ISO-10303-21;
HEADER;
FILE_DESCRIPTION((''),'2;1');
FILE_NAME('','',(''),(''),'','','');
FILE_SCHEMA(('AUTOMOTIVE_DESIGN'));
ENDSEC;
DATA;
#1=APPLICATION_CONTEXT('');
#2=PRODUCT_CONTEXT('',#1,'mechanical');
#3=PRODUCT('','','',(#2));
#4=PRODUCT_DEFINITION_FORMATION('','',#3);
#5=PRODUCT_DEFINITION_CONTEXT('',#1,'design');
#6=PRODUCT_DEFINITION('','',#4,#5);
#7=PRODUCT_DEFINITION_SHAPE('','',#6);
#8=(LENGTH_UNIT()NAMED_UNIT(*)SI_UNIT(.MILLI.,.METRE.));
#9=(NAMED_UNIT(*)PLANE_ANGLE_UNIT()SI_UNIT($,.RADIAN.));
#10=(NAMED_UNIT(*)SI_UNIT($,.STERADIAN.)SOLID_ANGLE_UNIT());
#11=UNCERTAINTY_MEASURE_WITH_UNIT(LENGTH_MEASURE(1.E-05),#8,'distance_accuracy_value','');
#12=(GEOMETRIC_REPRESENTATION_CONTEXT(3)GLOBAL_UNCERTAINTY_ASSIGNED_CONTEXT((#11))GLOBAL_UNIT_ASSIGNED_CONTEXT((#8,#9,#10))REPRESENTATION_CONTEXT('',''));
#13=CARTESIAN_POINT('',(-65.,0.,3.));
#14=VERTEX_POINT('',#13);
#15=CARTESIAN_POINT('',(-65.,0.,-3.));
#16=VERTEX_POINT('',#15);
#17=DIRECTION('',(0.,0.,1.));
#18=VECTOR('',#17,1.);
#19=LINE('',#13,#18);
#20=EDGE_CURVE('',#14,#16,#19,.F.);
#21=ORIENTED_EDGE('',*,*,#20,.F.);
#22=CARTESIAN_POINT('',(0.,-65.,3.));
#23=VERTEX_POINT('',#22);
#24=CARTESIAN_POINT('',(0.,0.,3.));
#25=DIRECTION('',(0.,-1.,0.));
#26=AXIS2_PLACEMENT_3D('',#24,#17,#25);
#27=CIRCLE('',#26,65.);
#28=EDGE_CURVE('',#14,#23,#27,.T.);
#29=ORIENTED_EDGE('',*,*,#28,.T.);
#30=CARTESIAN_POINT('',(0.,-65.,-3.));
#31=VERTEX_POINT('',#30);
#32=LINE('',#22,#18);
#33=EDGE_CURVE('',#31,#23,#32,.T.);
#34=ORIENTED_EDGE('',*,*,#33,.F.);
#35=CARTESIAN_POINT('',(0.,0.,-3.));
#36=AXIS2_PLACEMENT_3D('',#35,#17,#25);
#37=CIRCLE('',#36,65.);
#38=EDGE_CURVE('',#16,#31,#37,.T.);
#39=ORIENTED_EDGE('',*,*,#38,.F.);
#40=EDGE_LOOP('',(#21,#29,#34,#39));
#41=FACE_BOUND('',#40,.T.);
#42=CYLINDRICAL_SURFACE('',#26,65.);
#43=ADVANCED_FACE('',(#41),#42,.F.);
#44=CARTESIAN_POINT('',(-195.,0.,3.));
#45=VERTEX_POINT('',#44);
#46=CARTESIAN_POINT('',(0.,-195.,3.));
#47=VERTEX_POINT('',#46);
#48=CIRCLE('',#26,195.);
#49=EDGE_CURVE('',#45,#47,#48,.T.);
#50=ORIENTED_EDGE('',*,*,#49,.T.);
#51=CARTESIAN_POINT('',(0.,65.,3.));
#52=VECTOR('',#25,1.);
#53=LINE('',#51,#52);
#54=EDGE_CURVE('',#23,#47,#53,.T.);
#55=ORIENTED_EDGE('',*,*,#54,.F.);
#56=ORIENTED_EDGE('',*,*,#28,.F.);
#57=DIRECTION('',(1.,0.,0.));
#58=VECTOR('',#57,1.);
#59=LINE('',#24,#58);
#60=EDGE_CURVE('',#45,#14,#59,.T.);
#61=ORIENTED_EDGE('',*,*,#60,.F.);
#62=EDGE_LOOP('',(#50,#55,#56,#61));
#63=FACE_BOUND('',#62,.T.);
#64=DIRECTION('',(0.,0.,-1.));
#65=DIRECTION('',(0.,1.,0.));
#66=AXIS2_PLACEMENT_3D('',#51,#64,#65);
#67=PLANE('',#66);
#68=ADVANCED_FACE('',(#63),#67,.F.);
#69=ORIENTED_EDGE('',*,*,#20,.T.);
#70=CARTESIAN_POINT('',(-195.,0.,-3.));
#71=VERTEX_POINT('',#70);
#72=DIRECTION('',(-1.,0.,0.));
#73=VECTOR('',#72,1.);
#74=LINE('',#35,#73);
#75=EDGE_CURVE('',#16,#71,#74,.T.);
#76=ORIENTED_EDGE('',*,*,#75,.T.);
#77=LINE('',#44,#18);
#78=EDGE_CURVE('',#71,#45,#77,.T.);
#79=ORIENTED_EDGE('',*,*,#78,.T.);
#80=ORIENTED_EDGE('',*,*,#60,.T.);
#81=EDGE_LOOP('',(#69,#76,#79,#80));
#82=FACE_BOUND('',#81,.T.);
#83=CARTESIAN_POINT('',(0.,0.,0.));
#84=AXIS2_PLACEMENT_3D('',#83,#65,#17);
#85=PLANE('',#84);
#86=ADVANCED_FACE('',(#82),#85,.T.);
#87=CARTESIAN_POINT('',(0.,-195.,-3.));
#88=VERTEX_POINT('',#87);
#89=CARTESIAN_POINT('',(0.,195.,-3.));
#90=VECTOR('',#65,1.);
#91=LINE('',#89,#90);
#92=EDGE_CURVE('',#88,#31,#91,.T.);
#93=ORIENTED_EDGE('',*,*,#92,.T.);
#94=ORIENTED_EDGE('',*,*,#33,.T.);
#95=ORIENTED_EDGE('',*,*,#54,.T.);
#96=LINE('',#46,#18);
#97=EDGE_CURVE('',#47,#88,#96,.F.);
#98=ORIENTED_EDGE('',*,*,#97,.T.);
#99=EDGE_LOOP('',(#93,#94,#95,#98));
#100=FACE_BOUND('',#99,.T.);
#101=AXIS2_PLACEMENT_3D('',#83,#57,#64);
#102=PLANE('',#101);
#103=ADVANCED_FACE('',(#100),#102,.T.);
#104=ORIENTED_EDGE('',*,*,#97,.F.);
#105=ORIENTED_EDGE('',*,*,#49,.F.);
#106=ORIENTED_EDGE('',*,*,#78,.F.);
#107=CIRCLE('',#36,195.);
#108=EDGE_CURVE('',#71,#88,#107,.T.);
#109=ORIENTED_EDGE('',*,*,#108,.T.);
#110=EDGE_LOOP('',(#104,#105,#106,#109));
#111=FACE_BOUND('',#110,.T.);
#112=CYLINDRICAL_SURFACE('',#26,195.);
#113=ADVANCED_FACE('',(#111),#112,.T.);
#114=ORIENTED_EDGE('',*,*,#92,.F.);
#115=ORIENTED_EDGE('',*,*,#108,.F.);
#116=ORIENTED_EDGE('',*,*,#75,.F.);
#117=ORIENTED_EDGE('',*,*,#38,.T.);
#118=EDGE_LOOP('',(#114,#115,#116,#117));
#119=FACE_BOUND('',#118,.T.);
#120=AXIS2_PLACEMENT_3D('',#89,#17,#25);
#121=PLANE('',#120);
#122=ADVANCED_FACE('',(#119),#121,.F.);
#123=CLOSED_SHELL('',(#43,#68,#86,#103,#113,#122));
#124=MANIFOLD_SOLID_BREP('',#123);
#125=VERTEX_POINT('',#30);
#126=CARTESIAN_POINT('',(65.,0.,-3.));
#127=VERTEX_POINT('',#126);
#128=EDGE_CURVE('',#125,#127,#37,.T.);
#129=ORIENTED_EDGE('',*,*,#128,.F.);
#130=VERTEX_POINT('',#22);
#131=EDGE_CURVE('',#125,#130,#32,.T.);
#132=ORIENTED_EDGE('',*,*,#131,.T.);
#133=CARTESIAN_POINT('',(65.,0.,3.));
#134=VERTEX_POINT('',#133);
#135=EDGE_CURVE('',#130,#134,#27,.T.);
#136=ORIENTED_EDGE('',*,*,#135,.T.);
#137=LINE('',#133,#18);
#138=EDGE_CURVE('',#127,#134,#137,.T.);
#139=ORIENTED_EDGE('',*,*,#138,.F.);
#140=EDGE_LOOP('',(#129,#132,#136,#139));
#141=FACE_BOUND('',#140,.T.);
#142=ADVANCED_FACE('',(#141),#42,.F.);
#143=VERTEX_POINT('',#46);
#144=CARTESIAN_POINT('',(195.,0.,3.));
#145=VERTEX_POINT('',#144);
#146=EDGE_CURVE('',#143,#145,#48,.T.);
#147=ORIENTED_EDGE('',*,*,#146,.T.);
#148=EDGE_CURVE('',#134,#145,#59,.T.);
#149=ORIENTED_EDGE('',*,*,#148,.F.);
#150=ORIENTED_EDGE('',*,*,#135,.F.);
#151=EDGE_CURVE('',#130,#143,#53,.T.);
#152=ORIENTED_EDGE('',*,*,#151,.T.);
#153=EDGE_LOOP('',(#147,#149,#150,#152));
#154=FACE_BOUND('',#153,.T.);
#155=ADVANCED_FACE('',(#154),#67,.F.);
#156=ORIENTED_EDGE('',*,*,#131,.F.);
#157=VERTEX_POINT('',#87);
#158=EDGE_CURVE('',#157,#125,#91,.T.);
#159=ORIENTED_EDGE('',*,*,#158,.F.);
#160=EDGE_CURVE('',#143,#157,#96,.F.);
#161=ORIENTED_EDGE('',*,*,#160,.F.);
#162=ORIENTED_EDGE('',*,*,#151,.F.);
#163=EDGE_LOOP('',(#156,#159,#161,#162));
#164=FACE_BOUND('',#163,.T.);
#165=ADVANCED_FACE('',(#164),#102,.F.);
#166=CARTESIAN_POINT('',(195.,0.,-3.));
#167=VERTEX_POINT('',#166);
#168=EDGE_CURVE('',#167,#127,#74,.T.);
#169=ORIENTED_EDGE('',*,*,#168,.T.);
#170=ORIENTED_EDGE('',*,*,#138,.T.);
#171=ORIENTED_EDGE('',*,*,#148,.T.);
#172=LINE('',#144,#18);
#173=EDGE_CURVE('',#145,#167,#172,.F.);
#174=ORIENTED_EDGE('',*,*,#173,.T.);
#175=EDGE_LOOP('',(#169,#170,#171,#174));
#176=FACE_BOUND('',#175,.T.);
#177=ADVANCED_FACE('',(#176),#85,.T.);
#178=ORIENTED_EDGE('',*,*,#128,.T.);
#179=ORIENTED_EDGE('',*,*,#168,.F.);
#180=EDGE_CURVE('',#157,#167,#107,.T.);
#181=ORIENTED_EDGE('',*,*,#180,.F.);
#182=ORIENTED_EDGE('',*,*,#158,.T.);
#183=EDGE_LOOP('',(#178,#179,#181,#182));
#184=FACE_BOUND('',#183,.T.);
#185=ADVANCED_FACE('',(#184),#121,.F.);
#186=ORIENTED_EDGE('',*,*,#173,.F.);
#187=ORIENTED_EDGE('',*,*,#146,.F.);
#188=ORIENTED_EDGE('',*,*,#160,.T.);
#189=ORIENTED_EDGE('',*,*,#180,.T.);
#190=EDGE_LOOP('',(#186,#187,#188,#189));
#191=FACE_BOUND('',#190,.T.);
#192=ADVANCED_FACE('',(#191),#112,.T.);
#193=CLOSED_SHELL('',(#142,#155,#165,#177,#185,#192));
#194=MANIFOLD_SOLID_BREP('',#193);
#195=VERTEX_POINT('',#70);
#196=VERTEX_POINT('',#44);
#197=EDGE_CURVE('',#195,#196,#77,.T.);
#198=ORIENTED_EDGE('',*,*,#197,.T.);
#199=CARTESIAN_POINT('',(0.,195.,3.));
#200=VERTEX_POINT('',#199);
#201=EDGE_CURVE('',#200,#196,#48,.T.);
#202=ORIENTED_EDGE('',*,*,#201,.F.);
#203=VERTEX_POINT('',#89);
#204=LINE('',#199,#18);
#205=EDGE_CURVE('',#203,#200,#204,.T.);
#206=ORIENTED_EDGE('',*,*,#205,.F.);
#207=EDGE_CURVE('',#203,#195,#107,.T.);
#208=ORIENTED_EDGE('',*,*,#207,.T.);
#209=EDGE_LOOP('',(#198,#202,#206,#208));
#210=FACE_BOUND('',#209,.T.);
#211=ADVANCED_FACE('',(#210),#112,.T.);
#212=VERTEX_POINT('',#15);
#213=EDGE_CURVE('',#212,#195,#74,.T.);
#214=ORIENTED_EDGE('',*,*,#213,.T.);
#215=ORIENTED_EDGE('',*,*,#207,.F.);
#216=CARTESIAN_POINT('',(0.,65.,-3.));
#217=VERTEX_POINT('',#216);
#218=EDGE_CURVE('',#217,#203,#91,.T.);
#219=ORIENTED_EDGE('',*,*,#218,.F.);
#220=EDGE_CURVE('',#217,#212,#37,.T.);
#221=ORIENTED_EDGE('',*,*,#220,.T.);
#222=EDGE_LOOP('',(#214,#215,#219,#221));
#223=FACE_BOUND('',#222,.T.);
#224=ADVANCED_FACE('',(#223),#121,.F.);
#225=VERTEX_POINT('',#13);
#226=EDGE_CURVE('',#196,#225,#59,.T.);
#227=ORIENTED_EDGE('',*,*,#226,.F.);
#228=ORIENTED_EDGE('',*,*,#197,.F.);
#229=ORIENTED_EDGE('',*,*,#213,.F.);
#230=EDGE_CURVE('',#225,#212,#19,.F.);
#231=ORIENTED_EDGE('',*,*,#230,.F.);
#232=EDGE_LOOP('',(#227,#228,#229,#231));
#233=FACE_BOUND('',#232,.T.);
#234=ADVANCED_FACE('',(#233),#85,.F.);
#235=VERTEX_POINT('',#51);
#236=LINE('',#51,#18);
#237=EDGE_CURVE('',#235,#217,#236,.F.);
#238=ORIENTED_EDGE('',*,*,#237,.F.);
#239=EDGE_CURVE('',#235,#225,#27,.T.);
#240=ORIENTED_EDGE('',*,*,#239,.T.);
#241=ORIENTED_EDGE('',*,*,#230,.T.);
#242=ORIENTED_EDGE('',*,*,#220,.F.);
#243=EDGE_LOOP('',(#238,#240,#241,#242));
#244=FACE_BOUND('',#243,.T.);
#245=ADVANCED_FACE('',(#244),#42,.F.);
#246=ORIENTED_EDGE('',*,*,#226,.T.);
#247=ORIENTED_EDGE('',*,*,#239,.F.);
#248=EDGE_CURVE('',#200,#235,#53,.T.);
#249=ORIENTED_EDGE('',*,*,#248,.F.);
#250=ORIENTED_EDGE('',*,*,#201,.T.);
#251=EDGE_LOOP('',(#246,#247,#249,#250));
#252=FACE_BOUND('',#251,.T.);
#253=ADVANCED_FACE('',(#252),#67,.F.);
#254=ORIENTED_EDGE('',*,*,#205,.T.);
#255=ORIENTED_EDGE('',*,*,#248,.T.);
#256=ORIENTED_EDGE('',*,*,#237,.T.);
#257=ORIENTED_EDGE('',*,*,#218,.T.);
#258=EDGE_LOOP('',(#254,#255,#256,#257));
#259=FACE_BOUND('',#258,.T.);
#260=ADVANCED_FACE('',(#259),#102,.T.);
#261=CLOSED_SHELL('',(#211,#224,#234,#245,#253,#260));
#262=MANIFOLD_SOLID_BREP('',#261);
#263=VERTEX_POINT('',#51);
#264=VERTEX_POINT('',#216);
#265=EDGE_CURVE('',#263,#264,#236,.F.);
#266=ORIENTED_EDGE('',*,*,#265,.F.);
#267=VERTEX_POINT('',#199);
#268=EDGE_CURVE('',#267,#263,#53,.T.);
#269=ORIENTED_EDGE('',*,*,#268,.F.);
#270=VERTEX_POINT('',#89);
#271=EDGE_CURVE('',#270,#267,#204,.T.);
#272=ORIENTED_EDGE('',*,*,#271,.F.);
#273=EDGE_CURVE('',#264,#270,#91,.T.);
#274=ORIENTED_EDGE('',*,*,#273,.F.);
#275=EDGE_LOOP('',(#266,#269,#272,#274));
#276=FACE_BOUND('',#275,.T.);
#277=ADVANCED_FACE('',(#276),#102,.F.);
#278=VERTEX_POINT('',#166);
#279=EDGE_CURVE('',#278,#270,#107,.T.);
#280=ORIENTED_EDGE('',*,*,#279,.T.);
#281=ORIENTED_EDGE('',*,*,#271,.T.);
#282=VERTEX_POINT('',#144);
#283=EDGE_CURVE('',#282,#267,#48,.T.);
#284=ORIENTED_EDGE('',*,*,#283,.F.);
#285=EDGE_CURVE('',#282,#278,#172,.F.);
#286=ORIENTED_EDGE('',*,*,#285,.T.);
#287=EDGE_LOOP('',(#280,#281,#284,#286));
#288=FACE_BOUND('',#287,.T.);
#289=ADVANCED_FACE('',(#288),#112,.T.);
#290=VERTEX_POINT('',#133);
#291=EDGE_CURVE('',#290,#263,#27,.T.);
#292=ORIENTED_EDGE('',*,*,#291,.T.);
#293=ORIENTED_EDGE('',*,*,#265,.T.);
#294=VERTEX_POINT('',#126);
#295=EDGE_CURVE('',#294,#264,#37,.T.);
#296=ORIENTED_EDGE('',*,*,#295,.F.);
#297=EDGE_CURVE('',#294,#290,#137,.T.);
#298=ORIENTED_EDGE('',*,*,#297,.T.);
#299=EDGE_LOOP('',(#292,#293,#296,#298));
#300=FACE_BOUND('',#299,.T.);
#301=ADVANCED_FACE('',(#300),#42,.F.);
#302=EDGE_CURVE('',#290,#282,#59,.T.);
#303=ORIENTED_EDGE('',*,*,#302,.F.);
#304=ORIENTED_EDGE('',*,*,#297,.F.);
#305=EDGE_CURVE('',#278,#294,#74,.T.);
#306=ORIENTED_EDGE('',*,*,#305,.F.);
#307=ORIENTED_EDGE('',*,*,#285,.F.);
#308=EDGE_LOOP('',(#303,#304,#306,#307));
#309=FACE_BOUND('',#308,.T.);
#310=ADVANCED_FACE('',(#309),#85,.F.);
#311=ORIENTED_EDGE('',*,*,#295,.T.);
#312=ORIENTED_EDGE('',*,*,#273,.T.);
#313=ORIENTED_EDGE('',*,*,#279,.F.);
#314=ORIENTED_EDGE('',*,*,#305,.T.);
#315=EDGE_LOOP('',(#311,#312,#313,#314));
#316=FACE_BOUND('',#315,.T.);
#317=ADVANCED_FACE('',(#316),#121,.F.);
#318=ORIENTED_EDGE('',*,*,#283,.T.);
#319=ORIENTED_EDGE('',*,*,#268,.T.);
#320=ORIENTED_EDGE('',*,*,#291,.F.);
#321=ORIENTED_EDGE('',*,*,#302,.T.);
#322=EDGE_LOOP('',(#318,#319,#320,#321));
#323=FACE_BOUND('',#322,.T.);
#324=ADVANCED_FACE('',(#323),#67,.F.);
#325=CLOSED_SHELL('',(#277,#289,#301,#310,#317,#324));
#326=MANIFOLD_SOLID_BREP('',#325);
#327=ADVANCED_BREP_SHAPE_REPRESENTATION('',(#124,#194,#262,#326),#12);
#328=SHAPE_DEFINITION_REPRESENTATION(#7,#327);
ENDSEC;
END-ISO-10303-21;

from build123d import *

# Parameters (mm, degrees)
SKETCH1_W          = 6
SKETCH1_H          = 130
SKETCH3_W          = 6
SKETCH3_H          = 390
SPLIT2_OUTLINE_W   = 196
SPLIT2_OUTLINE_H   = 6
SPLIT2_DEPTH       = 195
SPLIT2_START       = -3
SPLIT2_2_DEPTH     = 6
SPLIT2_3_OUTLINE_W = 196
SPLIT2_3_OUTLINE_H = 6
SPLIT2_3_DEPTH     = 195
SPLIT2_4_DEPTH     = 6


# Read off the part's stored shape, not the designer's step: Split2
with BuildPart() as part:
    # Sketch1 → Revolve1 (revolve)
    with BuildSketch(Plane(origin=(0, 0, 0), x_dir=(0, 0, -1), z_dir=(1, 0, 0)), mode=Mode.PRIVATE) as revolve1_sk:
        with Locations((0, 130)):
            Rectangle(SKETCH1_W, SKETCH1_H)
    revolve(revolve1_sk.sketch.rotate(Axis((0, 0, 3), (0, 0, -1)), 180), axis=Axis((0, 0, 3), (0, 0, -1)))


with BuildPart() as body_2:
    # Split1: the piece behind the surface
    add(part.part)
    # Sketch3 → Surface-Plane1: a flat surface bounded by the sketch
    with BuildSketch(Plane(origin=(0, 0, 0), x_dir=(0, 0, -1), z_dir=(1, 0, 0)), mode=Mode.PRIVATE) as surface_plane1_1_region:
        Rectangle(SKETCH3_W, SKETCH3_H)
    surface_plane1_1 = surface_plane1_1_region.sketch.faces()[0]
    split(bisect_by=surface_plane1_1, keep=Keep.BOTTOM)

    # Split2 outline → Split2 (cut)
    with BuildSketch(Plane(origin=(0, 0, 0), x_dir=(1, 0, 0), z_dir=(0, 1, 0))):
        with Locations((-98, 0)):
            Rectangle(SPLIT2_OUTLINE_W, SPLIT2_OUTLINE_H)
    extrude(amount=SPLIT2_DEPTH, mode=Mode.SUBTRACT)


with BuildPart() as part_1:
    add(part.part)

    # Split1: split by a surface, the side it looks to stays
    # Sketch3 → Surface-Plane1: a flat surface bounded by the sketch
    with BuildSketch(Plane(origin=(0, 0, 0), x_dir=(0, 0, -1), z_dir=(1, 0, 0)), mode=Mode.PRIVATE) as surface_plane1_2_region:
        Rectangle(SKETCH3_W, SKETCH3_H)
    surface_plane1_2 = surface_plane1_2_region.sketch.faces()[0]
    split(bisect_by=surface_plane1_2, keep=Keep.TOP)

    # Split2 3 outline → Split2 3 (cut)
    with BuildSketch(Plane(origin=(0, 0, 0), x_dir=(1, 0, 0), z_dir=(0, 1, 0))):
        with Locations((98, 0)):
            Rectangle(SPLIT2_3_OUTLINE_W, SPLIT2_3_OUTLINE_H)
    extrude(amount=SPLIT2_3_DEPTH, mode=Mode.SUBTRACT)


with BuildPart() as body_3:
    # Split2 2 outline → Split2 2 (new body)
    with BuildSketch(Plane.XY.offset(SPLIT2_START)):
        with BuildLine():
            Line((-195, 0), (-65, 0))
            ThreePointArc((-65, 0), (-45.961940777, 45.961940777), (0, 65))
            Line((0, 65), (0, 195))
            ThreePointArc((0, 195), (-137.885822331, 137.885822331), (-195, 0))
        make_face()
    extrude(amount=SPLIT2_2_DEPTH)


with BuildPart() as body_4:
    # Split2 4 outline → Split2 4 (new body)
    with BuildSketch(Plane.XY.offset(SPLIT2_START)):
        with BuildLine():
            Line((65, 0), (195, 0))
            ThreePointArc((195, 0), (137.885822331, 137.885822331), (0, 195))
            Line((0, 195), (0, 65))
            ThreePointArc((0, 65), (45.961940777, 45.961940777), (65, 0))
        make_face()
    extrude(amount=SPLIT2_4_DEPTH)


solid = Compound([body_2.part, part_1.part, body_3.part, body_4.part])
